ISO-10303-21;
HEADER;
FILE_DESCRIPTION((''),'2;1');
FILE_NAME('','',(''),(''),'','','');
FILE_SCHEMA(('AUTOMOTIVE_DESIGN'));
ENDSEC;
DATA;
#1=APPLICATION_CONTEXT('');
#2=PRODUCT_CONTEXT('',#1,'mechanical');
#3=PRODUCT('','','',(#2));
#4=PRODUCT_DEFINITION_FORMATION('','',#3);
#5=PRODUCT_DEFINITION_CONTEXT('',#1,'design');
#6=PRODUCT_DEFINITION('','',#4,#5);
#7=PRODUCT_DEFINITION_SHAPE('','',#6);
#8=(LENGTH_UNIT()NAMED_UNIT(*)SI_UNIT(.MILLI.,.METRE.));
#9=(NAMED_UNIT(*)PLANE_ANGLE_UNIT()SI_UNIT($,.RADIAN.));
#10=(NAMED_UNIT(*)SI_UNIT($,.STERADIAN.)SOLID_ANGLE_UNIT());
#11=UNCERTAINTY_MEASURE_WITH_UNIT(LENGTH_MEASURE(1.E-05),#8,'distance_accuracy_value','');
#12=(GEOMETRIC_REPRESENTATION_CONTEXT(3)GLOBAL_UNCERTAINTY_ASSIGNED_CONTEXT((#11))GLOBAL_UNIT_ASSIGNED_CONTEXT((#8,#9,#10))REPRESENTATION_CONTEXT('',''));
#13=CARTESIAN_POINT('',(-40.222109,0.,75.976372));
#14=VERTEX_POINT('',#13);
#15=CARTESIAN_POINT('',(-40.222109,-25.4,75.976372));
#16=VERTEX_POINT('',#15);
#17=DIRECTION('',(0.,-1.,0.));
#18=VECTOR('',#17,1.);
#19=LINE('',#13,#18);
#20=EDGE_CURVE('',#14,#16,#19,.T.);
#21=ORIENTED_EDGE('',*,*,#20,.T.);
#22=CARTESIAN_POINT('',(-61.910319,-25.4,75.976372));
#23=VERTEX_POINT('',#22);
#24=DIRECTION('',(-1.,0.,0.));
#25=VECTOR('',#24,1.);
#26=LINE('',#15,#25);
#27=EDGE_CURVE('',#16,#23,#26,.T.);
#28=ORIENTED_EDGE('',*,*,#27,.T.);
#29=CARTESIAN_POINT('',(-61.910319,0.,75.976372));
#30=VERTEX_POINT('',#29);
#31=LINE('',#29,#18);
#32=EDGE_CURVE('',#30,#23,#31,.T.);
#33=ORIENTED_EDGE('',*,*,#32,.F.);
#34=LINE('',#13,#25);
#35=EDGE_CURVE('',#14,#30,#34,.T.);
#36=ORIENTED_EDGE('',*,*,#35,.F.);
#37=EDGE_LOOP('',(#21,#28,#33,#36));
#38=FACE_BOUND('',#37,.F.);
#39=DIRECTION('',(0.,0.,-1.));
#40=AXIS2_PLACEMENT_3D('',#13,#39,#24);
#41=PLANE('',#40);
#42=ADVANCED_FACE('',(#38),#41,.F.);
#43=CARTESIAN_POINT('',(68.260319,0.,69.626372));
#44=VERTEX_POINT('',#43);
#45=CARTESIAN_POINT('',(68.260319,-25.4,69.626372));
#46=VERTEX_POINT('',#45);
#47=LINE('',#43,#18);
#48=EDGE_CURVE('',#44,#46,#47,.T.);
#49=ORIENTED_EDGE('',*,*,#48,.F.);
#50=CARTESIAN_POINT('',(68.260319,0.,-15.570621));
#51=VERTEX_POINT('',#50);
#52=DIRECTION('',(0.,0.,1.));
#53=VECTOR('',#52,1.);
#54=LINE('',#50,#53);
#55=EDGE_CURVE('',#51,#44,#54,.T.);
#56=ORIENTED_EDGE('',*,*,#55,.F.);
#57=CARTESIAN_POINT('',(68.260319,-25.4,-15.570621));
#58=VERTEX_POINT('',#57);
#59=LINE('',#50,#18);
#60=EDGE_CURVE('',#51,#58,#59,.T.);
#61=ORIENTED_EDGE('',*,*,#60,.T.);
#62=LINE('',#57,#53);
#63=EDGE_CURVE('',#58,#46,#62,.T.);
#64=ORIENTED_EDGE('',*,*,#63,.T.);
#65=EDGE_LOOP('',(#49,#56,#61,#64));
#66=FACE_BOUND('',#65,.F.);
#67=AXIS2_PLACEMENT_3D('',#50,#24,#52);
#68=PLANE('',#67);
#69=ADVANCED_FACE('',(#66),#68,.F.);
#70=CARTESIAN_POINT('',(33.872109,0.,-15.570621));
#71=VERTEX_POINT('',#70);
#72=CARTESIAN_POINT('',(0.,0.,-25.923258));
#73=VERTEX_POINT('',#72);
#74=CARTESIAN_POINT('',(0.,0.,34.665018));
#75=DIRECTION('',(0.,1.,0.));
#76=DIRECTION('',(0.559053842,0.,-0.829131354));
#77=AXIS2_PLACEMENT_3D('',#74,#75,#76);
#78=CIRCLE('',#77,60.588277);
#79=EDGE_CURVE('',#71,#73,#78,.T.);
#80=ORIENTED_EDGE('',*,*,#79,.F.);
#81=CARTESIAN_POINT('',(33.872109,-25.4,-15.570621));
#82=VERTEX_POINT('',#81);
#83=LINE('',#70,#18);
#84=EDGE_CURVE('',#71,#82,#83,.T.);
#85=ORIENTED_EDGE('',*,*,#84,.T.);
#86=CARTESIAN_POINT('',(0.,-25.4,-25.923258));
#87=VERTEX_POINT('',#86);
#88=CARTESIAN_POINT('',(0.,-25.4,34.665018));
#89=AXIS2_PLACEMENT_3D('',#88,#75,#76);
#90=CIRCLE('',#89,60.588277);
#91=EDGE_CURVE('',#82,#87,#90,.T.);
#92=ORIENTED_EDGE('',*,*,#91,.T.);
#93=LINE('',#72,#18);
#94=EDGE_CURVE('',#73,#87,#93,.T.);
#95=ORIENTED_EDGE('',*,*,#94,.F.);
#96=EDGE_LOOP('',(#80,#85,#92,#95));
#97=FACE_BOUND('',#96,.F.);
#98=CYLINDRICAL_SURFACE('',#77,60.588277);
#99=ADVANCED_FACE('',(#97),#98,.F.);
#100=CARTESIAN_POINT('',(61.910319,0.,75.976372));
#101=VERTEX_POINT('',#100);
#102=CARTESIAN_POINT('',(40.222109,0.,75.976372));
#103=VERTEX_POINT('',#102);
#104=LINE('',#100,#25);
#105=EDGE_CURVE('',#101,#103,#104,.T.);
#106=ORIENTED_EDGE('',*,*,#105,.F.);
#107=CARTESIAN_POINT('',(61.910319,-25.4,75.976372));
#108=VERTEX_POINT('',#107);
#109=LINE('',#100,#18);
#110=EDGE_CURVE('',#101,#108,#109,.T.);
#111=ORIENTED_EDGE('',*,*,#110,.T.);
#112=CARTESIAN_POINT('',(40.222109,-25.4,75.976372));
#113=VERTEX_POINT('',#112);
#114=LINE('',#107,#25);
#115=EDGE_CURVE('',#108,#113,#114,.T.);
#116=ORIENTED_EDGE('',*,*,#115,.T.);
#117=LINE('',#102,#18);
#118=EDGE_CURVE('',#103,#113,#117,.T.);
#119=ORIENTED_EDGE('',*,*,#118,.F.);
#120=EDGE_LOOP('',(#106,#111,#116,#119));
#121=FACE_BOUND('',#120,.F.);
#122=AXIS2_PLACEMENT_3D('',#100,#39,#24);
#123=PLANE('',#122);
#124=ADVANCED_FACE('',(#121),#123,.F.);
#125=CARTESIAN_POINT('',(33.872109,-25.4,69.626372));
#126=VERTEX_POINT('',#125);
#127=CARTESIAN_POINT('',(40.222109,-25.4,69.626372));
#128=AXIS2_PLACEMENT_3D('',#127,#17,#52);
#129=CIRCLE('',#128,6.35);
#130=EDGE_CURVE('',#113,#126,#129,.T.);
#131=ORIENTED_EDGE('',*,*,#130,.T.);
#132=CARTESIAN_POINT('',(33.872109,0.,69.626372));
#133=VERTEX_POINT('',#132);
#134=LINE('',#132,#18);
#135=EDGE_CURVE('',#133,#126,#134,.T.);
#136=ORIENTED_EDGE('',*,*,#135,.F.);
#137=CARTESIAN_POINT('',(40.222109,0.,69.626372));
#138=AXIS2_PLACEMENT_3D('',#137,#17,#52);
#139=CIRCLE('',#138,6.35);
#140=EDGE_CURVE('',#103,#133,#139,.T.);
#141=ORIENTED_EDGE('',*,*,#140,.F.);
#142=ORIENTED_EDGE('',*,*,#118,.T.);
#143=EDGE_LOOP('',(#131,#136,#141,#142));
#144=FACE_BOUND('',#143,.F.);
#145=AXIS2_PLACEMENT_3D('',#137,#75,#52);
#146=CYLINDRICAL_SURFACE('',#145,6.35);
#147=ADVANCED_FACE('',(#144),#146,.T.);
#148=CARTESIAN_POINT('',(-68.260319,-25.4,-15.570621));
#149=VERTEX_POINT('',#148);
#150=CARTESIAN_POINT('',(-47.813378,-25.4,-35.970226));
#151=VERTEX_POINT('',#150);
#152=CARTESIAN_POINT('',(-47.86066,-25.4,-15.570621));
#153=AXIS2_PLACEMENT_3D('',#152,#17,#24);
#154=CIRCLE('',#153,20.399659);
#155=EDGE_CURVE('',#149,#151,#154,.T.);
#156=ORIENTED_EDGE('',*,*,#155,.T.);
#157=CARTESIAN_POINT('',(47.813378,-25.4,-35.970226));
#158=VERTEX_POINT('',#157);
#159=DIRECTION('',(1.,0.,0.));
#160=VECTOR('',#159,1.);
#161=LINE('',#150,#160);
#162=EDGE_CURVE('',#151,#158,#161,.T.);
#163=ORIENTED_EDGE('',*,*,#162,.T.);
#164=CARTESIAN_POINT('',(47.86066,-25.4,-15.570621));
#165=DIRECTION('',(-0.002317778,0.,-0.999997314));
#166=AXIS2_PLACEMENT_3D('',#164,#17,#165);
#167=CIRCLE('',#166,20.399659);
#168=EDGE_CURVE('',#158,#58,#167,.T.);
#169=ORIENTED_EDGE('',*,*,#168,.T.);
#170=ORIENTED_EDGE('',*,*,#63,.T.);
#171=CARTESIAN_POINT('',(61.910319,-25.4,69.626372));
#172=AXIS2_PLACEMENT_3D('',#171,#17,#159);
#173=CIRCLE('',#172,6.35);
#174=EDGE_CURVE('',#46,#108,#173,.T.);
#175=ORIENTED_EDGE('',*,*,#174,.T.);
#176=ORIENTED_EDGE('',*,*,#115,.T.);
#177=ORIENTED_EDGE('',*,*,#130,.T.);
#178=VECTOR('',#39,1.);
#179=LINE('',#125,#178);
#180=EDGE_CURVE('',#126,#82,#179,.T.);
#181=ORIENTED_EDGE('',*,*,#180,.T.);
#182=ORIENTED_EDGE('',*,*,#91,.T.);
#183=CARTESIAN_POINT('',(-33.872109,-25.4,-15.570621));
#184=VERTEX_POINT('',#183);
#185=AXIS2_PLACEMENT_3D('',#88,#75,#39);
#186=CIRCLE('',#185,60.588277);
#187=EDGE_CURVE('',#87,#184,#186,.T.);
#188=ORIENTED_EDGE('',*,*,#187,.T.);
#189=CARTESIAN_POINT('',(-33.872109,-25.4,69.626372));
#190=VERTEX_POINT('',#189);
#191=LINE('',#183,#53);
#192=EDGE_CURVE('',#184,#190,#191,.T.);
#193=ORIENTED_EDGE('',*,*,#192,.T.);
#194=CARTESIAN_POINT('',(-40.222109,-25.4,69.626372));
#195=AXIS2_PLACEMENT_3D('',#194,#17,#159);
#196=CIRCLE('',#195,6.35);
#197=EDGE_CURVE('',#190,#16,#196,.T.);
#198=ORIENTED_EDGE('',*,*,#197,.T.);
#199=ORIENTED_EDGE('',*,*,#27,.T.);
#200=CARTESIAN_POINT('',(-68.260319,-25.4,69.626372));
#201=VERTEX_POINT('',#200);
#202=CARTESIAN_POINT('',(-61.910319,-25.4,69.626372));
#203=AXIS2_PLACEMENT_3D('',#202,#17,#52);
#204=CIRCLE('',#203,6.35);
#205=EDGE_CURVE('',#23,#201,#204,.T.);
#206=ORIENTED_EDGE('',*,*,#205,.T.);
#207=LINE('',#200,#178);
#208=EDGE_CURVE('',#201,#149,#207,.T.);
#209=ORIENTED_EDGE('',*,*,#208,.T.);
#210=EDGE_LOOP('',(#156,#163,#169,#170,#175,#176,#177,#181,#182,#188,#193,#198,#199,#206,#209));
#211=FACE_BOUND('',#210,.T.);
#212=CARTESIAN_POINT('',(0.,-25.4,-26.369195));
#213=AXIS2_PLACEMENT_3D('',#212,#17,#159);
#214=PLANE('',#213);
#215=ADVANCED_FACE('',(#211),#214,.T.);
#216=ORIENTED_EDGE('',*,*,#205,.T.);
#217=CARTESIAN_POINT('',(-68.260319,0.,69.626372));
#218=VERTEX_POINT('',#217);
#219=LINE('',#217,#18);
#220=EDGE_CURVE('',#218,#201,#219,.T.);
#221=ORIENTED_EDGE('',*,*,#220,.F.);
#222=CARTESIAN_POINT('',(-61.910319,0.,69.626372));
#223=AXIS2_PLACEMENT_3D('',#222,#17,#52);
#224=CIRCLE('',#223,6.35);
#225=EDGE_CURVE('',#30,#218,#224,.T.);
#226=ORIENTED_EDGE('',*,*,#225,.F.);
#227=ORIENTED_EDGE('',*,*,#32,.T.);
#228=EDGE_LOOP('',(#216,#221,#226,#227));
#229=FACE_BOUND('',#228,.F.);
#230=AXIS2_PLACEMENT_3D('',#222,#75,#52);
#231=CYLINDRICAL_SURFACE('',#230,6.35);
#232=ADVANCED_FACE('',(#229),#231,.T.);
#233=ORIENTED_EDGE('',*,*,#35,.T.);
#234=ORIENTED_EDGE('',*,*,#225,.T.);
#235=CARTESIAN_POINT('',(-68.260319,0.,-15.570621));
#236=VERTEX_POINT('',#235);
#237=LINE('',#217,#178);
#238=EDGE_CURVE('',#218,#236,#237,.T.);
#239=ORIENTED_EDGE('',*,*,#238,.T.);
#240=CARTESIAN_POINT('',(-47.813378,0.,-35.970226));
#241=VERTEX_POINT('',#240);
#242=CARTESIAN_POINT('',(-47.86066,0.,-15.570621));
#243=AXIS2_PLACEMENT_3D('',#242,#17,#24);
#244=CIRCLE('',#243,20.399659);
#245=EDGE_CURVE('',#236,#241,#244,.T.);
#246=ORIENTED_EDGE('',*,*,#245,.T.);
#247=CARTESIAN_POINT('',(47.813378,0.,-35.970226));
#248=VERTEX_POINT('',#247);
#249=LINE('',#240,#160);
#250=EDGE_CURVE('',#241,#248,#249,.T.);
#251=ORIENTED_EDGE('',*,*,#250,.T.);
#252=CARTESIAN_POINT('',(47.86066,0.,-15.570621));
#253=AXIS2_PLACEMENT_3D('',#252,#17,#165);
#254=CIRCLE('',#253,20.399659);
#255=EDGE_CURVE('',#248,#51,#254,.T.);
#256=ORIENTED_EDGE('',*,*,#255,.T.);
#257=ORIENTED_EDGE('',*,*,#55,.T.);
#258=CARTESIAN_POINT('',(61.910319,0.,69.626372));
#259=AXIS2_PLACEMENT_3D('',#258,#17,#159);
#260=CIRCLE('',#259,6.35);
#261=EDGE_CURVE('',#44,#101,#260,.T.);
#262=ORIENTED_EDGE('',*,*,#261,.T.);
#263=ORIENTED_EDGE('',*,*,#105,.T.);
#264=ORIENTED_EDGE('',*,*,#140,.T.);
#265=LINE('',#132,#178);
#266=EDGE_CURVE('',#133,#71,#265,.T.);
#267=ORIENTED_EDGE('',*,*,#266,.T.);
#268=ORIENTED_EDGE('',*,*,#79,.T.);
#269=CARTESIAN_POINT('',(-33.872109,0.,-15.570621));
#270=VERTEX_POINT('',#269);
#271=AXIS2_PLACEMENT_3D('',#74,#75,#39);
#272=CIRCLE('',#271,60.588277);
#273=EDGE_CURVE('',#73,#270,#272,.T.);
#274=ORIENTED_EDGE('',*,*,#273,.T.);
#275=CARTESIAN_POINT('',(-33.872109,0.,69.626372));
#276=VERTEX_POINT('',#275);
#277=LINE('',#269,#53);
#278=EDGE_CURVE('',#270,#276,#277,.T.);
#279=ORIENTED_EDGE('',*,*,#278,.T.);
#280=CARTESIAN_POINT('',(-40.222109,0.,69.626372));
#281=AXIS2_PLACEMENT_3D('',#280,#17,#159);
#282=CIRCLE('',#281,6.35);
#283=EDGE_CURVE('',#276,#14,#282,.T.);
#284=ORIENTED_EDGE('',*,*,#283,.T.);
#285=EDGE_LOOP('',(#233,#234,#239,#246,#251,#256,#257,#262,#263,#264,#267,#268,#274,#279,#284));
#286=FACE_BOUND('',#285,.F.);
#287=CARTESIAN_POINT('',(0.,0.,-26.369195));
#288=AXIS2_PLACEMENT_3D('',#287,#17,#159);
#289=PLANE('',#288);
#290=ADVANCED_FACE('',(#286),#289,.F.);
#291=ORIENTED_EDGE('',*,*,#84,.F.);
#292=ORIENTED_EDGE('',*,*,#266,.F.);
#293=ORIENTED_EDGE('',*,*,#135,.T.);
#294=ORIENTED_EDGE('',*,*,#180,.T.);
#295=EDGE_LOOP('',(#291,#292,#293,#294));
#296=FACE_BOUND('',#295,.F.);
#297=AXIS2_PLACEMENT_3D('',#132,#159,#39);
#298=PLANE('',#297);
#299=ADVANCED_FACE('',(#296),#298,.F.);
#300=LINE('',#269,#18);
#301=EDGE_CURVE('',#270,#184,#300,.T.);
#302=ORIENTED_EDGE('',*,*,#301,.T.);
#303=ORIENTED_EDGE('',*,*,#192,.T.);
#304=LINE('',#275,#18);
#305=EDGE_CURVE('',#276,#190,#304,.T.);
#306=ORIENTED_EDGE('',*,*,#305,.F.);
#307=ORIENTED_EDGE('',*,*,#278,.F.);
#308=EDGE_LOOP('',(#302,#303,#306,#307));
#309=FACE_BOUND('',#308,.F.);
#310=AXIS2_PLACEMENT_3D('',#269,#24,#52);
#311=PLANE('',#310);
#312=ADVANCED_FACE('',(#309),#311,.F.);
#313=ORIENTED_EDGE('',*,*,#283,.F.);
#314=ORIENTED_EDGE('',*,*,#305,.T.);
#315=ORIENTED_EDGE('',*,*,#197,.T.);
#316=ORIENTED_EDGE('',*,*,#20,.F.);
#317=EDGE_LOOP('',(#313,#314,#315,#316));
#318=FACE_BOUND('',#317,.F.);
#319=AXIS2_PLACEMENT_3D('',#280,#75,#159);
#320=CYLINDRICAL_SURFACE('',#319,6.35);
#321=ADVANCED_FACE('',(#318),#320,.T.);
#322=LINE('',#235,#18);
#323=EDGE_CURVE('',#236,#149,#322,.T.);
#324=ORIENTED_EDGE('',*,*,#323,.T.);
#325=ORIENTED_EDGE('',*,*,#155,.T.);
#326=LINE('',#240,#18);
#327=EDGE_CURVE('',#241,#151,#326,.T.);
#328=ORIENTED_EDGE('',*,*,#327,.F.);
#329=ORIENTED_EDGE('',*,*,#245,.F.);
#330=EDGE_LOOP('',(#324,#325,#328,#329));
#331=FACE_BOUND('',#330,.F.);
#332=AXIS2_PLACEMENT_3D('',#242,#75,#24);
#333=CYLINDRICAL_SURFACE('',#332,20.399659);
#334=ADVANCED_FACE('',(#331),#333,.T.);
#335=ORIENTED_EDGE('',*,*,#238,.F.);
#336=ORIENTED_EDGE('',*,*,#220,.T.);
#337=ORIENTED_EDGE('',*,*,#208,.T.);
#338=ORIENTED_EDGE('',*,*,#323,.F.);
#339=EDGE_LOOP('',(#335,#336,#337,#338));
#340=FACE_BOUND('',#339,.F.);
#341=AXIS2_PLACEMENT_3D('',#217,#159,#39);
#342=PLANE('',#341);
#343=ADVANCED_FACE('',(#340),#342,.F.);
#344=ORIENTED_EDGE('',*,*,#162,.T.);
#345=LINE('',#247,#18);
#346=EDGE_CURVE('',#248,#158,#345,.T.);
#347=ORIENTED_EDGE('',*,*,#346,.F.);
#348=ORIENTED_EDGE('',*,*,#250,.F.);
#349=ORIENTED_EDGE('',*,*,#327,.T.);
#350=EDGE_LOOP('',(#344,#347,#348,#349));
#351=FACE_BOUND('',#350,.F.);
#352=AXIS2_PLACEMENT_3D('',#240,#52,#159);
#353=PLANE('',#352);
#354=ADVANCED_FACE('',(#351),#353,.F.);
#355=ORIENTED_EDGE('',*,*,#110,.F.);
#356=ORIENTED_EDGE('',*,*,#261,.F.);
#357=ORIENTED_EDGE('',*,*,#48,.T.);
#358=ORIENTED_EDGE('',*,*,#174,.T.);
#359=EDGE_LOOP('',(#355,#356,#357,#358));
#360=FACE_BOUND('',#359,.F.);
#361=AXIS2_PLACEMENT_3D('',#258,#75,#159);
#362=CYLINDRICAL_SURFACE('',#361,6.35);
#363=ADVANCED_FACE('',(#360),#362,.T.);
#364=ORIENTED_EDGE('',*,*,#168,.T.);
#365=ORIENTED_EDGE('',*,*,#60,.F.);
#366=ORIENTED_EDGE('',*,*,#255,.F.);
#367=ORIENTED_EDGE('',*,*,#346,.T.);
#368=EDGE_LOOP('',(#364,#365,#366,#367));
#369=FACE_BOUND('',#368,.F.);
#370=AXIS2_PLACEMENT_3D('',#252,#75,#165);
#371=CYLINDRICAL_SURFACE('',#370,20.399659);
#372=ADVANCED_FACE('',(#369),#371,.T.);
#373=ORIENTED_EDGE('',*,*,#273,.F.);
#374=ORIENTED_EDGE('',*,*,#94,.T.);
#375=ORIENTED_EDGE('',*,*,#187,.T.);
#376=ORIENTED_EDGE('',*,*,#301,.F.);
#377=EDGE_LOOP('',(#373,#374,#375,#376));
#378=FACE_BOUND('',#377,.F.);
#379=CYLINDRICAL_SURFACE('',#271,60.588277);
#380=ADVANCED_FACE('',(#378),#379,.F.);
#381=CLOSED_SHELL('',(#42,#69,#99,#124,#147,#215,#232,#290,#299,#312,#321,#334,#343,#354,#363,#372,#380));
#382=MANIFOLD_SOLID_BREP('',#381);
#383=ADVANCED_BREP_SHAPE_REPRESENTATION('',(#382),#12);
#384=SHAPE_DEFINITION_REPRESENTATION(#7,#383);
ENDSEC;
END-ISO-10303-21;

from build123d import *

# Parameters (mm, degrees)
F1_DEPTH = 25.4


# Not quite as in the source:
# - the program builds the solid bodies; features that only make, move or delete a surface that nothing else refers to are left out


with BuildPart() as f1:
    # F0 (on Front) → F1 (new body)
    with BuildSketch(Plane.XZ):
        with BuildLine():
            ThreePointArc((0, -25.9232582643), (-17.7094384525, -23.2773241348), (-33.8721087757, -15.5706214843))
            Line((-33.8721087757, -15.5706214843), (-68.2603194002, -15.5706214843))
            ThreePointArc((-68.2603194002, -15.5706214843), (-62.2686711741, -30.0120658628), (-47.8133782744, -35.9702259302))
            Line((-47.8133782744, -35.9702259302), (0, -35.9702259302))
            Line((0, -35.9702259302), (47.8133782744, -35.9702259302))
            ThreePointArc((47.8133782744, -35.9702259302), (62.2686711741, -30.0120658628), (68.2603194002, -15.5706214843))
            Line((68.2603194002, -15.5706214843), (33.8721087757, -15.5706214843))
            ThreePointArc((33.8721087757, -15.5706214843), (17.7094384525, -23.2773241348), (0, -25.9232582643))
        make_face()
        with BuildLine():
            Line((-68.2603194002, -15.5706214843), (-33.8721087757, -15.5706214843))
            Line((-33.8721087757, -15.5706214843), (-33.8721087757, 69.6263722184))
            ThreePointArc((-33.8721087757, 69.6263722184), (-35.7319807152, 74.1165002789), (-40.2221087757, 75.9763722184))
            Line((-40.2221087757, 75.9763722184), (-61.9103194002, 75.9763722184))
            ThreePointArc((-61.9103194002, 75.9763722184), (-66.4004474607, 74.1165002789), (-68.2603194002, 69.6263722184))
            Line((-68.2603194002, 69.6263722184), (-68.2603194002, -15.5706214843))
        make_face()
        with BuildLine():
            Line((33.8721087757, 69.6263722184), (33.8721087757, -15.5706214843))
            Line((33.8721087757, -15.5706214843), (68.2603194002, -15.5706214843))
            Line((68.2603194002, -15.5706214843), (68.2603194002, 69.6263722184))
            ThreePointArc((68.2603194002, 69.6263722184), (66.4004474607, 74.1165002789), (61.9103194002, 75.9763722184))
            Line((61.9103194002, 75.9763722184), (40.2221087757, 75.9763722184))
            ThreePointArc((40.2221087757, 75.9763722184), (35.7319807152, 74.1165002789), (33.8721087757, 69.6263722184))
        make_face()
    extrude(amount=F1_DEPTH)


solid = f1.part
